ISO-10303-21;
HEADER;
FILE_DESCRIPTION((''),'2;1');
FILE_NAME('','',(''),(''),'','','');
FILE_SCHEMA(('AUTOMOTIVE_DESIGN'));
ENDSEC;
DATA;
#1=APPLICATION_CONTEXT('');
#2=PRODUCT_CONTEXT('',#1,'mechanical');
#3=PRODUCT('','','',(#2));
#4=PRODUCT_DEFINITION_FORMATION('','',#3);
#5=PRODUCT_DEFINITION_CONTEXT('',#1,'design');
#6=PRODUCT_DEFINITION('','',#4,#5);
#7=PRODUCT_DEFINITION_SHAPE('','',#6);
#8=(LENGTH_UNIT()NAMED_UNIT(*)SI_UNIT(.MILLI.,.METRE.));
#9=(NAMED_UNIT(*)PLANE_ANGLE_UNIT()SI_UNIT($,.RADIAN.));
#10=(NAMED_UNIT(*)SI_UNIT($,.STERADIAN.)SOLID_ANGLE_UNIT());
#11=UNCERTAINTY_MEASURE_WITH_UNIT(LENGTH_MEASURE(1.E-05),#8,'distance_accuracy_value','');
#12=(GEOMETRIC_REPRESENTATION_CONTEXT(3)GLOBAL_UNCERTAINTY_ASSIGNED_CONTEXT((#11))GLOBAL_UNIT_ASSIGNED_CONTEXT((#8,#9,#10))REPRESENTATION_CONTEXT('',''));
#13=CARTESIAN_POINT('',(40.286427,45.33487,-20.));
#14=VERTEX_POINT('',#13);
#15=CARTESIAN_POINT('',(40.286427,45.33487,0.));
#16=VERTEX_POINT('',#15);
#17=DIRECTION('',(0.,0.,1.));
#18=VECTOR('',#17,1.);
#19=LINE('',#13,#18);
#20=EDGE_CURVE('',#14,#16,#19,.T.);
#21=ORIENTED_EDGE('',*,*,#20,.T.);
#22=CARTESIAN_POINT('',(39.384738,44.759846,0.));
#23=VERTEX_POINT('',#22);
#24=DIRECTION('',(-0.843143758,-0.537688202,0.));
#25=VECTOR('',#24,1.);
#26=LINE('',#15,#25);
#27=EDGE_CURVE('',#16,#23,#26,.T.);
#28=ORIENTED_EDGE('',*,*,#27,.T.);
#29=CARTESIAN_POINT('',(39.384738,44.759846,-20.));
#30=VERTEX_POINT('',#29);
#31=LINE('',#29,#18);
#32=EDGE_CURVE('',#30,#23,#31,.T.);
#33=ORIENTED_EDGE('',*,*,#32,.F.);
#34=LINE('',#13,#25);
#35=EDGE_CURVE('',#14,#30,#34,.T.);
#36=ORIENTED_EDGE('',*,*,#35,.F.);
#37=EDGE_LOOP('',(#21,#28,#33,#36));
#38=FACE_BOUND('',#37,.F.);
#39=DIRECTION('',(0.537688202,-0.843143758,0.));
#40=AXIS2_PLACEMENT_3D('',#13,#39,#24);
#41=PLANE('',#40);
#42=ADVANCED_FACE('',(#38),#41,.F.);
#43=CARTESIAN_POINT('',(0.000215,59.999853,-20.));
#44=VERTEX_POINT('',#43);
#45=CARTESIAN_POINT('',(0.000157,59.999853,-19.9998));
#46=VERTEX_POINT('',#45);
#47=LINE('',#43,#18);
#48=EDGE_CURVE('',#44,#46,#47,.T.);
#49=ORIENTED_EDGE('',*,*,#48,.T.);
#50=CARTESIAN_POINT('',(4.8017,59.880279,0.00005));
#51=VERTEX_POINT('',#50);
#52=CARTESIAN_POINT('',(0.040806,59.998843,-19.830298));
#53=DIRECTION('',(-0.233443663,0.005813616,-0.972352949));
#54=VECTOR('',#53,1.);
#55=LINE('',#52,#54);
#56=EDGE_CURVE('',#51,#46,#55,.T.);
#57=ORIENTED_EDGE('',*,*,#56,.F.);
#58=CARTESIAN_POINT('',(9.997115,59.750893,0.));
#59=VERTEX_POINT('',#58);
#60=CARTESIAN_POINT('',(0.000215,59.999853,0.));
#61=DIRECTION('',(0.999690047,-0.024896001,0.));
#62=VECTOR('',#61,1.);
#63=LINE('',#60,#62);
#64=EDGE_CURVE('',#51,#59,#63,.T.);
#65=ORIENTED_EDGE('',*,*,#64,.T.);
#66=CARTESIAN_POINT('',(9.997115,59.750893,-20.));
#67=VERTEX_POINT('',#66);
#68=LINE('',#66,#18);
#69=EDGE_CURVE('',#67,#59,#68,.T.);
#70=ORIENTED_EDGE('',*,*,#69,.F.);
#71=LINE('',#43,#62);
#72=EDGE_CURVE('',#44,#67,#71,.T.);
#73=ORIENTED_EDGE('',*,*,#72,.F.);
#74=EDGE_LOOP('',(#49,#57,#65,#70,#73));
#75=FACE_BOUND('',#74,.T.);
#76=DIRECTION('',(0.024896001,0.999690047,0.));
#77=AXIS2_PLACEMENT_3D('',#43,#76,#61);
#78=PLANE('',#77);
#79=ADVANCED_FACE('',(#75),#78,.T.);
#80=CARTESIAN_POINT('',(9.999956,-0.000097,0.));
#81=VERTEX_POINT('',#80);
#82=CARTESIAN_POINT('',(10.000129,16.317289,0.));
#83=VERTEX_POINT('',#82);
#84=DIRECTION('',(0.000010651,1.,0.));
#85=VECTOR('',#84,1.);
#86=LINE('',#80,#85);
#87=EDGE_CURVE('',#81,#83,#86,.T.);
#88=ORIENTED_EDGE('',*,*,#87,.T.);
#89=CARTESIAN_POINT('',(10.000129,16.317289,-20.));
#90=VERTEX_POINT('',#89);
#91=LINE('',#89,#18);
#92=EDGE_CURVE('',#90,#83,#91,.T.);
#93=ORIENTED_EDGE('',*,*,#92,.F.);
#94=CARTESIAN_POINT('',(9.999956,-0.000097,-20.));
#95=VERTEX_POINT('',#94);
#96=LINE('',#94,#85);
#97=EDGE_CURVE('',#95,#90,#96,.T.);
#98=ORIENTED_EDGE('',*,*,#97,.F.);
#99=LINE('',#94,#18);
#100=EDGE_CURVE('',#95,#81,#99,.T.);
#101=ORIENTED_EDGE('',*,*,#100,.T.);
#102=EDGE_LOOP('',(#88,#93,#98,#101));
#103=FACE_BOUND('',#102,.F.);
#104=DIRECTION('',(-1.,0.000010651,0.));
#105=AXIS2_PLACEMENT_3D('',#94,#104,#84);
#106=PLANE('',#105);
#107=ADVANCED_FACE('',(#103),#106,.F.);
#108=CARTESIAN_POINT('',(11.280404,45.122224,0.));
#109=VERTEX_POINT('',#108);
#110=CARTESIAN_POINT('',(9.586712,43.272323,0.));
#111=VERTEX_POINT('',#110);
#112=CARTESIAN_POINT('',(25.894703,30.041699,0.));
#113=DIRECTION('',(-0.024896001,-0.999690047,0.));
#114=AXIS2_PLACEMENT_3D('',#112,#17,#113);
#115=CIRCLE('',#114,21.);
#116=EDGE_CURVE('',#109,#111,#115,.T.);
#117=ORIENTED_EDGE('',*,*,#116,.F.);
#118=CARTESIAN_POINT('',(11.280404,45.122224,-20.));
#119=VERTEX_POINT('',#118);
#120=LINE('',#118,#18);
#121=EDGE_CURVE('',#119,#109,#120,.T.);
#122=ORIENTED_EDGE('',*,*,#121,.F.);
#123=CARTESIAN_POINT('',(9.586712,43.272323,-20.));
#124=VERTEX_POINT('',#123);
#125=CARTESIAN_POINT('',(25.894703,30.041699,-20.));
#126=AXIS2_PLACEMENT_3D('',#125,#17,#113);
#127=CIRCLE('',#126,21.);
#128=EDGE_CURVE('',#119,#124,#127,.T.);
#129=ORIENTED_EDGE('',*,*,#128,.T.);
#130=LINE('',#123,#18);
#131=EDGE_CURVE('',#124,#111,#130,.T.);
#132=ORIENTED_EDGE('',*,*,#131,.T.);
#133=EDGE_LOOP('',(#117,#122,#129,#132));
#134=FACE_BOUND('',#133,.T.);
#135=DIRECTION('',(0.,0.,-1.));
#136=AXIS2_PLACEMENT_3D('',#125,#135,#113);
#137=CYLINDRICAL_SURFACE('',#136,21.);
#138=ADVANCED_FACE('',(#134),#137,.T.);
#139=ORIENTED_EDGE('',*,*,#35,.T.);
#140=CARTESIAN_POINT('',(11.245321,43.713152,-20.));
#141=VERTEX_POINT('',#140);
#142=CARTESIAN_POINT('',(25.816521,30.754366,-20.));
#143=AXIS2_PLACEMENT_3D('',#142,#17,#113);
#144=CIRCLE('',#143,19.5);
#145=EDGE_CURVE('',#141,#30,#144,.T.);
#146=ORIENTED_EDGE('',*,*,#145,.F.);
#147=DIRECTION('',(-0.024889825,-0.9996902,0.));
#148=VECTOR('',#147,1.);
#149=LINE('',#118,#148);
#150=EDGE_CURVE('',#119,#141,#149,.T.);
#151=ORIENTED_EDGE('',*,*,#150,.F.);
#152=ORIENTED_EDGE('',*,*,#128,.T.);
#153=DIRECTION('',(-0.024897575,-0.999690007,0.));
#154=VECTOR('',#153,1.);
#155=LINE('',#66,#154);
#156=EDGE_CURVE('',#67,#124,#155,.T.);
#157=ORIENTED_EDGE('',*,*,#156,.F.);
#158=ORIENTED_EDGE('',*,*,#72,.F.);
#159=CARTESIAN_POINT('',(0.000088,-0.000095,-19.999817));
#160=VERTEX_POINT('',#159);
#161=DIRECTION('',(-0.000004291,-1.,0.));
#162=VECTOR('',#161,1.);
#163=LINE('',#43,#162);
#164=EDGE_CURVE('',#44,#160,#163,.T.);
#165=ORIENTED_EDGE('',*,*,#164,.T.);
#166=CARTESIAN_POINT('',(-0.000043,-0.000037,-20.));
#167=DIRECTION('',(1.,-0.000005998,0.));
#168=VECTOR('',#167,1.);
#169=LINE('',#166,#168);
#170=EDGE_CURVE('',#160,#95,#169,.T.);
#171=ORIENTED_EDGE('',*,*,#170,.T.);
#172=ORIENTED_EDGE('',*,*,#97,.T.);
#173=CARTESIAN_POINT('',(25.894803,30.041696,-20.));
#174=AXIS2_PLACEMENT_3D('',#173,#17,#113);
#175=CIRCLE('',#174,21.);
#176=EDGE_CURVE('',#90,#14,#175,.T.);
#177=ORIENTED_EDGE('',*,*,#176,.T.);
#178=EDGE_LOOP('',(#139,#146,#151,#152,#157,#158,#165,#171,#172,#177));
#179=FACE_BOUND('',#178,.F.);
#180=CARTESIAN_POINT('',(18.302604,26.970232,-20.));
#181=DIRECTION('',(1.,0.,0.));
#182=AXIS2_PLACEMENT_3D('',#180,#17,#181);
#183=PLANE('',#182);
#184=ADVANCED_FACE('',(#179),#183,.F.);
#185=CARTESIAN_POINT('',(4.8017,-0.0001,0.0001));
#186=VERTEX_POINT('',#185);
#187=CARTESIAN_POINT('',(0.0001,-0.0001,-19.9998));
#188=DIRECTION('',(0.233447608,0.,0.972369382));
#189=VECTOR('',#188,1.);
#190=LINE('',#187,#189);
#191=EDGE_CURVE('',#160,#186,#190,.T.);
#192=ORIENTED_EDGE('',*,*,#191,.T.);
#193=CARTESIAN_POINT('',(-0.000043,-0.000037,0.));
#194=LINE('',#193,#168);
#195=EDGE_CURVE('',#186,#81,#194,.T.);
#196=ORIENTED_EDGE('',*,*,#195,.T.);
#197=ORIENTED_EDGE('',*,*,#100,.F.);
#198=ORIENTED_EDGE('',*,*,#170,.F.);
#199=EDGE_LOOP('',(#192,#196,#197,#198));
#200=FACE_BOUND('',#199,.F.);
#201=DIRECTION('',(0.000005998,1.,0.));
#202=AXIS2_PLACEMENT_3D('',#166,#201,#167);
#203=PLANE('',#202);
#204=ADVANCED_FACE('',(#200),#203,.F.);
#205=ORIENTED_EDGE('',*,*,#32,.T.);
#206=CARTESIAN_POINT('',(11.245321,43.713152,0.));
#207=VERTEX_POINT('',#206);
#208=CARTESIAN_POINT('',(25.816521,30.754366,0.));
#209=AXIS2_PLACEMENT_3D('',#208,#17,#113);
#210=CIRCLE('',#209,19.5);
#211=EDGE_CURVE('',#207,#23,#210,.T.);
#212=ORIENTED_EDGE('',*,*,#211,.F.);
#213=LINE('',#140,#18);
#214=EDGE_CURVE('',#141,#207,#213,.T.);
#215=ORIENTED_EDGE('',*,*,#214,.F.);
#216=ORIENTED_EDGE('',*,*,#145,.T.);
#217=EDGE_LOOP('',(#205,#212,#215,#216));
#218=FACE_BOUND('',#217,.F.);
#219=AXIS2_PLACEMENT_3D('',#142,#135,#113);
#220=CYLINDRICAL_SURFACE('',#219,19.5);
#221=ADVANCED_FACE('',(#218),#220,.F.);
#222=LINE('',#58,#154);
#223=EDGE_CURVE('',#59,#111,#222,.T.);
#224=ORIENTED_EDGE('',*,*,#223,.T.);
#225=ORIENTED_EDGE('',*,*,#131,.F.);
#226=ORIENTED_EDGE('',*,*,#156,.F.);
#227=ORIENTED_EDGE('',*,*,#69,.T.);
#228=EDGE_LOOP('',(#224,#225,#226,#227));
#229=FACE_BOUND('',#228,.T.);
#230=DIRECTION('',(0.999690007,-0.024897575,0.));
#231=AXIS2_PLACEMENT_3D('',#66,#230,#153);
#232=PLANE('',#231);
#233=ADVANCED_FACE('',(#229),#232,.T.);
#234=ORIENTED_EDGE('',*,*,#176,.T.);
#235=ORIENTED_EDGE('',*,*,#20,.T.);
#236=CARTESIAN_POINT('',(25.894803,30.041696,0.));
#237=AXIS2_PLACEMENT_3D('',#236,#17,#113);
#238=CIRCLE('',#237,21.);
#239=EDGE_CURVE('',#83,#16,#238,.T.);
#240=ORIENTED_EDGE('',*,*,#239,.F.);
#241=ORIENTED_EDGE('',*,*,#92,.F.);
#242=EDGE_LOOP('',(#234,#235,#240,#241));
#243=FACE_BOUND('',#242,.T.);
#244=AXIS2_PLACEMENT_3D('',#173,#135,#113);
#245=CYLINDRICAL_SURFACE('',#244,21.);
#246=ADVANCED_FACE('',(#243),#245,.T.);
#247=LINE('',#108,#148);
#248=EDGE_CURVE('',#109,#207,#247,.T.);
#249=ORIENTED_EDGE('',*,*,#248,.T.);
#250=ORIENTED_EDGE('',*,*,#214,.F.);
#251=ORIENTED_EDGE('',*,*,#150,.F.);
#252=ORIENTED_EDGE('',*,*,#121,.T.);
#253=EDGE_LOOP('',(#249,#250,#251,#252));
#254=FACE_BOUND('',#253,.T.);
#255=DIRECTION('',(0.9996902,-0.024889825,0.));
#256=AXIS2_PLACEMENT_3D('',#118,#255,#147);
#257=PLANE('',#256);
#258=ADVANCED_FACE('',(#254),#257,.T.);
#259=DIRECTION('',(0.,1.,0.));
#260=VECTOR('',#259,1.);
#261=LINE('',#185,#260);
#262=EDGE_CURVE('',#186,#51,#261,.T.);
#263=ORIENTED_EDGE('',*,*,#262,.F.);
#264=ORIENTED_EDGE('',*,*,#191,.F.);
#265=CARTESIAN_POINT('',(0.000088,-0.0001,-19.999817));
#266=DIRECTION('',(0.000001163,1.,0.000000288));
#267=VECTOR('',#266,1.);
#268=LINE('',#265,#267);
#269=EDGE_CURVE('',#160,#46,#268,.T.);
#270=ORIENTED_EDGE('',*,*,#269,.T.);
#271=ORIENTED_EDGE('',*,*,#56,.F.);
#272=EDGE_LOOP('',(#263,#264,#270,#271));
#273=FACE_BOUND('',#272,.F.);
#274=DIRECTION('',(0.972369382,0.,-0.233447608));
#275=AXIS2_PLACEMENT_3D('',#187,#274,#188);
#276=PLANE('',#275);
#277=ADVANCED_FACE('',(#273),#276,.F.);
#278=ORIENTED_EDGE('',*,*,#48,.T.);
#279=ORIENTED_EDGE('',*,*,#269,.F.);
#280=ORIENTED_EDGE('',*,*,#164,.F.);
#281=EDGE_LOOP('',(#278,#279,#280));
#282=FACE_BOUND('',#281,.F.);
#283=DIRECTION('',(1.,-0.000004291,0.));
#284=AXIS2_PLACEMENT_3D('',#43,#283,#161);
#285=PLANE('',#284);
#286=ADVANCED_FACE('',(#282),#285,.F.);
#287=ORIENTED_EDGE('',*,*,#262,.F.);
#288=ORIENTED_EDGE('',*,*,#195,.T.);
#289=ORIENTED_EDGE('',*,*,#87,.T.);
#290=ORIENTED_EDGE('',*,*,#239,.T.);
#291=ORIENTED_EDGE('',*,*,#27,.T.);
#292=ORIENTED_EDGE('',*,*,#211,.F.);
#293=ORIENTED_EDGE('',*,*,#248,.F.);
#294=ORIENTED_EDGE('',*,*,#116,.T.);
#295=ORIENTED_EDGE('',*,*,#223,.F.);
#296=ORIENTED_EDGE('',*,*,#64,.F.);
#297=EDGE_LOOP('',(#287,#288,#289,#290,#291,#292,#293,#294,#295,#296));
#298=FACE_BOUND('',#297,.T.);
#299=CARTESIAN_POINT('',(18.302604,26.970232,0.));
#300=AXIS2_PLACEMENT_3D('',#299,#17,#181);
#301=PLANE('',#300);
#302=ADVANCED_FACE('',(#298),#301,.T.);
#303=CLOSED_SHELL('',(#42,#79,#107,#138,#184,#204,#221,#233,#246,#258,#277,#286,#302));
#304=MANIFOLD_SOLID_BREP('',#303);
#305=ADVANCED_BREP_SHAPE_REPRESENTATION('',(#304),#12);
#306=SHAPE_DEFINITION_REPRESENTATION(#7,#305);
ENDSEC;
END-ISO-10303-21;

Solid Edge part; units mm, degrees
sketch "Sketch1" plane through (23.4359, 29.9999, -20) normal (0, 0, -1) x (-0.024896, -0.99969, 0)
  arc A0 (-14.815, 12.5282) -> (-12.9235, 14.1753) centre (-0.103, -2.457) cw
  line L0 (-29.4072, 14.1753) -> (-12.9235, 14.1753)
  line L1 (-29.4072, 24.1753) -> (-29.4072, 14.1753)
  line L2 (-29.4072, 24.1753) -> (30.5741, 22.6818)
  line L3 (30.5741, 22.6818) -> (30.3252, 12.6849)
  line L4 (30.3252, 12.6849) -> (14.0129, 13.091)
  line L5 (-15.7497, -16.4635) -> (-15.1524, -15.5764)
  line L6 (-14.815, 12.5282) -> (-13.4055, 12.5282)
  arc A1 (14.0129, 13.091) -> (-15.7497, -16.4635) centre (-0.103, -2.4571) cw
  arc A2 (-13.4055, 12.5282) -> (-15.1524, -15.5765) centre (-0.8135, -2.3611) cw
extrude "Protrusion1" add sketch "Sketch1" against normal blind 20
sketch "Sketch2" plane through (5.0002, -0.0001, -10) normal (0, -1, 0) x (1, 0, 0)
  line L0 (-5.0001, 10.0001) -> (-5.0001, -9.9998)
  line L1 (-5.0001, -9.9998) -> (-0.1985, 10.0001)
  line L2 (-0.1985, 10.0001) -> (-5.0001, 10.0001)
extrude "ExtrudedCutout_2" cut sketch "Sketch2" against normal blind 84.595
